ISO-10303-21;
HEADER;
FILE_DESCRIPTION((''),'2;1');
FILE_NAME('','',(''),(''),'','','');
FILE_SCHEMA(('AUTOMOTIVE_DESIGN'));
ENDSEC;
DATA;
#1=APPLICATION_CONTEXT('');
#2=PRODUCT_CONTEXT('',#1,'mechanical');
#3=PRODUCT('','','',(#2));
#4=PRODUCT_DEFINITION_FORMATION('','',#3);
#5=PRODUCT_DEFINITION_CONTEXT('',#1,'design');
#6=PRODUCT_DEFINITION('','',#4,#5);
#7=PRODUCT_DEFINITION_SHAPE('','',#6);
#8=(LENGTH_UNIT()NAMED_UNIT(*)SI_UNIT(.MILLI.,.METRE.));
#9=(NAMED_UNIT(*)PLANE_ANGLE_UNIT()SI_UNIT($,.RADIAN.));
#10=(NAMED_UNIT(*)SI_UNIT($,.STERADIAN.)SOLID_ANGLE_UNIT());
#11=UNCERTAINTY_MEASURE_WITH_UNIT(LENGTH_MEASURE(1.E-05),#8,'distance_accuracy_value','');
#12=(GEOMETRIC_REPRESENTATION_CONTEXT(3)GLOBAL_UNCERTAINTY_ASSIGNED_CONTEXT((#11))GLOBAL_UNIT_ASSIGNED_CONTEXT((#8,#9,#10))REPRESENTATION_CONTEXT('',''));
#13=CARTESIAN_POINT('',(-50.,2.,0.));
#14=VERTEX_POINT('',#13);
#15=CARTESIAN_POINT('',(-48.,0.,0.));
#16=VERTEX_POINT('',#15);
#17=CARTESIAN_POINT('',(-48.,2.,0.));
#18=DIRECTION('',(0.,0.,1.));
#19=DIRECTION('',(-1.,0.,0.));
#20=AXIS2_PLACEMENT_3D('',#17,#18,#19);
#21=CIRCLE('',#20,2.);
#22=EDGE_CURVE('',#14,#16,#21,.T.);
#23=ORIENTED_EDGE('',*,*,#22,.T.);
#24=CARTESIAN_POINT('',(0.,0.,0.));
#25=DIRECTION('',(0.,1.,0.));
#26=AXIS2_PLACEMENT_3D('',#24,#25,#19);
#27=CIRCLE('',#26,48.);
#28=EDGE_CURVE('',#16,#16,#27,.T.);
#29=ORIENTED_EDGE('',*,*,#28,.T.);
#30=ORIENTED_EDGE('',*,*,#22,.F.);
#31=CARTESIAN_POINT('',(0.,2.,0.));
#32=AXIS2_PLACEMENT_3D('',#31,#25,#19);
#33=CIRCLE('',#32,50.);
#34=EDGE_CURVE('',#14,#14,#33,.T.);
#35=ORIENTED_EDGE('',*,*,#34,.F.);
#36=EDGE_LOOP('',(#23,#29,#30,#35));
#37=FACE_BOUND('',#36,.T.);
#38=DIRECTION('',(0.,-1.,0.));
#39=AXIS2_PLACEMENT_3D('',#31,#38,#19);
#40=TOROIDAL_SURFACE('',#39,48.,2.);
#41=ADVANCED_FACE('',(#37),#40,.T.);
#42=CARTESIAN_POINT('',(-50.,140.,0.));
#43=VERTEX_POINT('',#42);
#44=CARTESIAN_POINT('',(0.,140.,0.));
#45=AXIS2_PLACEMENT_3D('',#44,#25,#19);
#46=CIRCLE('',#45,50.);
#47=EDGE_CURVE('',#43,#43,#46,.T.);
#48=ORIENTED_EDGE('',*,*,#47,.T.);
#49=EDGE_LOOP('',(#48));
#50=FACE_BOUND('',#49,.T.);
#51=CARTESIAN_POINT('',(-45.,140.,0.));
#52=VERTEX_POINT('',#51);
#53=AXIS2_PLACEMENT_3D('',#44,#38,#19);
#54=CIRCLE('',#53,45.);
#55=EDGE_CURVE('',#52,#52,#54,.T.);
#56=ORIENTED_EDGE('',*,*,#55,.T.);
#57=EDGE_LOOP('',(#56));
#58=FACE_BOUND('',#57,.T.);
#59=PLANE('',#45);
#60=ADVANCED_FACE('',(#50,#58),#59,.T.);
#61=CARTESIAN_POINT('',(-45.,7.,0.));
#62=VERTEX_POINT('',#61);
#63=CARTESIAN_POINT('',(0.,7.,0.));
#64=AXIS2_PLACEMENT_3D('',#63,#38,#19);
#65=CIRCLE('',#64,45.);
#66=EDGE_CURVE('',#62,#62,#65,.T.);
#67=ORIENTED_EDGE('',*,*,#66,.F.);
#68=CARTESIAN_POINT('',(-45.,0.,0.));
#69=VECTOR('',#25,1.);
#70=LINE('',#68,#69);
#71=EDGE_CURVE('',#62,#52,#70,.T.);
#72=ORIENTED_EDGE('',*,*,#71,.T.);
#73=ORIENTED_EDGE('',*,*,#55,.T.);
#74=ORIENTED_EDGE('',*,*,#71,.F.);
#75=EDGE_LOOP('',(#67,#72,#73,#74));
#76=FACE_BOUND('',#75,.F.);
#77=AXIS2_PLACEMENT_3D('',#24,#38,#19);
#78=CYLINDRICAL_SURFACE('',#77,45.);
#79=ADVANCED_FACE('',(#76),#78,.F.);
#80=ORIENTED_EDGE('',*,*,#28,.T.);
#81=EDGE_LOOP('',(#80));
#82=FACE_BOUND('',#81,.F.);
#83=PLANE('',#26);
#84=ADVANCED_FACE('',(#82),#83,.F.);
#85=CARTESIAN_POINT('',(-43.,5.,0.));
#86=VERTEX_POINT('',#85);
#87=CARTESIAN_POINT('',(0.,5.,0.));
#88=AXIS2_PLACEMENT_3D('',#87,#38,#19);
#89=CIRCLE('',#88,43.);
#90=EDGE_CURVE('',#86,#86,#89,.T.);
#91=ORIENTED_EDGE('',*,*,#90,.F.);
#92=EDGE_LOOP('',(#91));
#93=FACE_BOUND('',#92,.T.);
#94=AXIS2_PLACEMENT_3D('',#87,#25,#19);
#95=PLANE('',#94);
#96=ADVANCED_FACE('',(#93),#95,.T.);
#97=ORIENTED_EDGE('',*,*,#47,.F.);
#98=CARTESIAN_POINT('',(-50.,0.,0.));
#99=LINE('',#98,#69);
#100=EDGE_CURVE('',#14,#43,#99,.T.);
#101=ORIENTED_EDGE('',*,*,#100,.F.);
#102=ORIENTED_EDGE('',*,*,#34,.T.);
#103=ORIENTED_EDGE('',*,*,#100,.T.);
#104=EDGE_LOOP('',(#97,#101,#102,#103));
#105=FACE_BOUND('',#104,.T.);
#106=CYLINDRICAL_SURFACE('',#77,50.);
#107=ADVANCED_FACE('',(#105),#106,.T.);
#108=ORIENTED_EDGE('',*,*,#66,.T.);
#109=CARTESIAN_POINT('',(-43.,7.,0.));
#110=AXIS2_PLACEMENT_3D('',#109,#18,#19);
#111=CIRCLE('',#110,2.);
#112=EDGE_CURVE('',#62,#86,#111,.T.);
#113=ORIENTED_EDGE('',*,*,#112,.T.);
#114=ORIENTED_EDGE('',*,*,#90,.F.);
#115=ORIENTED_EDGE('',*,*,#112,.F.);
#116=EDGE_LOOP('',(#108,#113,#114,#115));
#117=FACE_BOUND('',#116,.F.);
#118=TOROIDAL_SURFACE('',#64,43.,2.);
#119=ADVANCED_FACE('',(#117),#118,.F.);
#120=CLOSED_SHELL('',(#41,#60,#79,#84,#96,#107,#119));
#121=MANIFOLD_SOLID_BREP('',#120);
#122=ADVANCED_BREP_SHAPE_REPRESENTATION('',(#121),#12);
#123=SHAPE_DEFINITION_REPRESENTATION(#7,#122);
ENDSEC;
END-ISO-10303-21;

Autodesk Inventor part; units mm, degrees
ref_plane "YZ Plane" through (0, 0, 0) normal (1, 0, 0) x (0, 1, 0)
ref_plane "XZ Plane" through (0, 0, 0) normal (0, 1, 0) x (-1, 0, 0)
ref_plane "XY Plane" through (0, 0, 0) normal (0, 0, 1) x (1, 0, 0)
sketch "Sketch1" plane through (0, 0, 0) normal (0, 1, 0) x (-1, 0, 0)
  circle A0 centre (0, 0) radius 50
  dimension "d0" = 100
extrude "Extrusion1" add sketch "Sketch1" along normal blind 140
shell "Shell1" thickness 5 removed faces 1 at (-9.39, 140, -8.8667)
fillet "Fillet1" radius 2 2 edges at (50, 0, 0) (45, 5, 0)
properties part number "Outer Layer"
